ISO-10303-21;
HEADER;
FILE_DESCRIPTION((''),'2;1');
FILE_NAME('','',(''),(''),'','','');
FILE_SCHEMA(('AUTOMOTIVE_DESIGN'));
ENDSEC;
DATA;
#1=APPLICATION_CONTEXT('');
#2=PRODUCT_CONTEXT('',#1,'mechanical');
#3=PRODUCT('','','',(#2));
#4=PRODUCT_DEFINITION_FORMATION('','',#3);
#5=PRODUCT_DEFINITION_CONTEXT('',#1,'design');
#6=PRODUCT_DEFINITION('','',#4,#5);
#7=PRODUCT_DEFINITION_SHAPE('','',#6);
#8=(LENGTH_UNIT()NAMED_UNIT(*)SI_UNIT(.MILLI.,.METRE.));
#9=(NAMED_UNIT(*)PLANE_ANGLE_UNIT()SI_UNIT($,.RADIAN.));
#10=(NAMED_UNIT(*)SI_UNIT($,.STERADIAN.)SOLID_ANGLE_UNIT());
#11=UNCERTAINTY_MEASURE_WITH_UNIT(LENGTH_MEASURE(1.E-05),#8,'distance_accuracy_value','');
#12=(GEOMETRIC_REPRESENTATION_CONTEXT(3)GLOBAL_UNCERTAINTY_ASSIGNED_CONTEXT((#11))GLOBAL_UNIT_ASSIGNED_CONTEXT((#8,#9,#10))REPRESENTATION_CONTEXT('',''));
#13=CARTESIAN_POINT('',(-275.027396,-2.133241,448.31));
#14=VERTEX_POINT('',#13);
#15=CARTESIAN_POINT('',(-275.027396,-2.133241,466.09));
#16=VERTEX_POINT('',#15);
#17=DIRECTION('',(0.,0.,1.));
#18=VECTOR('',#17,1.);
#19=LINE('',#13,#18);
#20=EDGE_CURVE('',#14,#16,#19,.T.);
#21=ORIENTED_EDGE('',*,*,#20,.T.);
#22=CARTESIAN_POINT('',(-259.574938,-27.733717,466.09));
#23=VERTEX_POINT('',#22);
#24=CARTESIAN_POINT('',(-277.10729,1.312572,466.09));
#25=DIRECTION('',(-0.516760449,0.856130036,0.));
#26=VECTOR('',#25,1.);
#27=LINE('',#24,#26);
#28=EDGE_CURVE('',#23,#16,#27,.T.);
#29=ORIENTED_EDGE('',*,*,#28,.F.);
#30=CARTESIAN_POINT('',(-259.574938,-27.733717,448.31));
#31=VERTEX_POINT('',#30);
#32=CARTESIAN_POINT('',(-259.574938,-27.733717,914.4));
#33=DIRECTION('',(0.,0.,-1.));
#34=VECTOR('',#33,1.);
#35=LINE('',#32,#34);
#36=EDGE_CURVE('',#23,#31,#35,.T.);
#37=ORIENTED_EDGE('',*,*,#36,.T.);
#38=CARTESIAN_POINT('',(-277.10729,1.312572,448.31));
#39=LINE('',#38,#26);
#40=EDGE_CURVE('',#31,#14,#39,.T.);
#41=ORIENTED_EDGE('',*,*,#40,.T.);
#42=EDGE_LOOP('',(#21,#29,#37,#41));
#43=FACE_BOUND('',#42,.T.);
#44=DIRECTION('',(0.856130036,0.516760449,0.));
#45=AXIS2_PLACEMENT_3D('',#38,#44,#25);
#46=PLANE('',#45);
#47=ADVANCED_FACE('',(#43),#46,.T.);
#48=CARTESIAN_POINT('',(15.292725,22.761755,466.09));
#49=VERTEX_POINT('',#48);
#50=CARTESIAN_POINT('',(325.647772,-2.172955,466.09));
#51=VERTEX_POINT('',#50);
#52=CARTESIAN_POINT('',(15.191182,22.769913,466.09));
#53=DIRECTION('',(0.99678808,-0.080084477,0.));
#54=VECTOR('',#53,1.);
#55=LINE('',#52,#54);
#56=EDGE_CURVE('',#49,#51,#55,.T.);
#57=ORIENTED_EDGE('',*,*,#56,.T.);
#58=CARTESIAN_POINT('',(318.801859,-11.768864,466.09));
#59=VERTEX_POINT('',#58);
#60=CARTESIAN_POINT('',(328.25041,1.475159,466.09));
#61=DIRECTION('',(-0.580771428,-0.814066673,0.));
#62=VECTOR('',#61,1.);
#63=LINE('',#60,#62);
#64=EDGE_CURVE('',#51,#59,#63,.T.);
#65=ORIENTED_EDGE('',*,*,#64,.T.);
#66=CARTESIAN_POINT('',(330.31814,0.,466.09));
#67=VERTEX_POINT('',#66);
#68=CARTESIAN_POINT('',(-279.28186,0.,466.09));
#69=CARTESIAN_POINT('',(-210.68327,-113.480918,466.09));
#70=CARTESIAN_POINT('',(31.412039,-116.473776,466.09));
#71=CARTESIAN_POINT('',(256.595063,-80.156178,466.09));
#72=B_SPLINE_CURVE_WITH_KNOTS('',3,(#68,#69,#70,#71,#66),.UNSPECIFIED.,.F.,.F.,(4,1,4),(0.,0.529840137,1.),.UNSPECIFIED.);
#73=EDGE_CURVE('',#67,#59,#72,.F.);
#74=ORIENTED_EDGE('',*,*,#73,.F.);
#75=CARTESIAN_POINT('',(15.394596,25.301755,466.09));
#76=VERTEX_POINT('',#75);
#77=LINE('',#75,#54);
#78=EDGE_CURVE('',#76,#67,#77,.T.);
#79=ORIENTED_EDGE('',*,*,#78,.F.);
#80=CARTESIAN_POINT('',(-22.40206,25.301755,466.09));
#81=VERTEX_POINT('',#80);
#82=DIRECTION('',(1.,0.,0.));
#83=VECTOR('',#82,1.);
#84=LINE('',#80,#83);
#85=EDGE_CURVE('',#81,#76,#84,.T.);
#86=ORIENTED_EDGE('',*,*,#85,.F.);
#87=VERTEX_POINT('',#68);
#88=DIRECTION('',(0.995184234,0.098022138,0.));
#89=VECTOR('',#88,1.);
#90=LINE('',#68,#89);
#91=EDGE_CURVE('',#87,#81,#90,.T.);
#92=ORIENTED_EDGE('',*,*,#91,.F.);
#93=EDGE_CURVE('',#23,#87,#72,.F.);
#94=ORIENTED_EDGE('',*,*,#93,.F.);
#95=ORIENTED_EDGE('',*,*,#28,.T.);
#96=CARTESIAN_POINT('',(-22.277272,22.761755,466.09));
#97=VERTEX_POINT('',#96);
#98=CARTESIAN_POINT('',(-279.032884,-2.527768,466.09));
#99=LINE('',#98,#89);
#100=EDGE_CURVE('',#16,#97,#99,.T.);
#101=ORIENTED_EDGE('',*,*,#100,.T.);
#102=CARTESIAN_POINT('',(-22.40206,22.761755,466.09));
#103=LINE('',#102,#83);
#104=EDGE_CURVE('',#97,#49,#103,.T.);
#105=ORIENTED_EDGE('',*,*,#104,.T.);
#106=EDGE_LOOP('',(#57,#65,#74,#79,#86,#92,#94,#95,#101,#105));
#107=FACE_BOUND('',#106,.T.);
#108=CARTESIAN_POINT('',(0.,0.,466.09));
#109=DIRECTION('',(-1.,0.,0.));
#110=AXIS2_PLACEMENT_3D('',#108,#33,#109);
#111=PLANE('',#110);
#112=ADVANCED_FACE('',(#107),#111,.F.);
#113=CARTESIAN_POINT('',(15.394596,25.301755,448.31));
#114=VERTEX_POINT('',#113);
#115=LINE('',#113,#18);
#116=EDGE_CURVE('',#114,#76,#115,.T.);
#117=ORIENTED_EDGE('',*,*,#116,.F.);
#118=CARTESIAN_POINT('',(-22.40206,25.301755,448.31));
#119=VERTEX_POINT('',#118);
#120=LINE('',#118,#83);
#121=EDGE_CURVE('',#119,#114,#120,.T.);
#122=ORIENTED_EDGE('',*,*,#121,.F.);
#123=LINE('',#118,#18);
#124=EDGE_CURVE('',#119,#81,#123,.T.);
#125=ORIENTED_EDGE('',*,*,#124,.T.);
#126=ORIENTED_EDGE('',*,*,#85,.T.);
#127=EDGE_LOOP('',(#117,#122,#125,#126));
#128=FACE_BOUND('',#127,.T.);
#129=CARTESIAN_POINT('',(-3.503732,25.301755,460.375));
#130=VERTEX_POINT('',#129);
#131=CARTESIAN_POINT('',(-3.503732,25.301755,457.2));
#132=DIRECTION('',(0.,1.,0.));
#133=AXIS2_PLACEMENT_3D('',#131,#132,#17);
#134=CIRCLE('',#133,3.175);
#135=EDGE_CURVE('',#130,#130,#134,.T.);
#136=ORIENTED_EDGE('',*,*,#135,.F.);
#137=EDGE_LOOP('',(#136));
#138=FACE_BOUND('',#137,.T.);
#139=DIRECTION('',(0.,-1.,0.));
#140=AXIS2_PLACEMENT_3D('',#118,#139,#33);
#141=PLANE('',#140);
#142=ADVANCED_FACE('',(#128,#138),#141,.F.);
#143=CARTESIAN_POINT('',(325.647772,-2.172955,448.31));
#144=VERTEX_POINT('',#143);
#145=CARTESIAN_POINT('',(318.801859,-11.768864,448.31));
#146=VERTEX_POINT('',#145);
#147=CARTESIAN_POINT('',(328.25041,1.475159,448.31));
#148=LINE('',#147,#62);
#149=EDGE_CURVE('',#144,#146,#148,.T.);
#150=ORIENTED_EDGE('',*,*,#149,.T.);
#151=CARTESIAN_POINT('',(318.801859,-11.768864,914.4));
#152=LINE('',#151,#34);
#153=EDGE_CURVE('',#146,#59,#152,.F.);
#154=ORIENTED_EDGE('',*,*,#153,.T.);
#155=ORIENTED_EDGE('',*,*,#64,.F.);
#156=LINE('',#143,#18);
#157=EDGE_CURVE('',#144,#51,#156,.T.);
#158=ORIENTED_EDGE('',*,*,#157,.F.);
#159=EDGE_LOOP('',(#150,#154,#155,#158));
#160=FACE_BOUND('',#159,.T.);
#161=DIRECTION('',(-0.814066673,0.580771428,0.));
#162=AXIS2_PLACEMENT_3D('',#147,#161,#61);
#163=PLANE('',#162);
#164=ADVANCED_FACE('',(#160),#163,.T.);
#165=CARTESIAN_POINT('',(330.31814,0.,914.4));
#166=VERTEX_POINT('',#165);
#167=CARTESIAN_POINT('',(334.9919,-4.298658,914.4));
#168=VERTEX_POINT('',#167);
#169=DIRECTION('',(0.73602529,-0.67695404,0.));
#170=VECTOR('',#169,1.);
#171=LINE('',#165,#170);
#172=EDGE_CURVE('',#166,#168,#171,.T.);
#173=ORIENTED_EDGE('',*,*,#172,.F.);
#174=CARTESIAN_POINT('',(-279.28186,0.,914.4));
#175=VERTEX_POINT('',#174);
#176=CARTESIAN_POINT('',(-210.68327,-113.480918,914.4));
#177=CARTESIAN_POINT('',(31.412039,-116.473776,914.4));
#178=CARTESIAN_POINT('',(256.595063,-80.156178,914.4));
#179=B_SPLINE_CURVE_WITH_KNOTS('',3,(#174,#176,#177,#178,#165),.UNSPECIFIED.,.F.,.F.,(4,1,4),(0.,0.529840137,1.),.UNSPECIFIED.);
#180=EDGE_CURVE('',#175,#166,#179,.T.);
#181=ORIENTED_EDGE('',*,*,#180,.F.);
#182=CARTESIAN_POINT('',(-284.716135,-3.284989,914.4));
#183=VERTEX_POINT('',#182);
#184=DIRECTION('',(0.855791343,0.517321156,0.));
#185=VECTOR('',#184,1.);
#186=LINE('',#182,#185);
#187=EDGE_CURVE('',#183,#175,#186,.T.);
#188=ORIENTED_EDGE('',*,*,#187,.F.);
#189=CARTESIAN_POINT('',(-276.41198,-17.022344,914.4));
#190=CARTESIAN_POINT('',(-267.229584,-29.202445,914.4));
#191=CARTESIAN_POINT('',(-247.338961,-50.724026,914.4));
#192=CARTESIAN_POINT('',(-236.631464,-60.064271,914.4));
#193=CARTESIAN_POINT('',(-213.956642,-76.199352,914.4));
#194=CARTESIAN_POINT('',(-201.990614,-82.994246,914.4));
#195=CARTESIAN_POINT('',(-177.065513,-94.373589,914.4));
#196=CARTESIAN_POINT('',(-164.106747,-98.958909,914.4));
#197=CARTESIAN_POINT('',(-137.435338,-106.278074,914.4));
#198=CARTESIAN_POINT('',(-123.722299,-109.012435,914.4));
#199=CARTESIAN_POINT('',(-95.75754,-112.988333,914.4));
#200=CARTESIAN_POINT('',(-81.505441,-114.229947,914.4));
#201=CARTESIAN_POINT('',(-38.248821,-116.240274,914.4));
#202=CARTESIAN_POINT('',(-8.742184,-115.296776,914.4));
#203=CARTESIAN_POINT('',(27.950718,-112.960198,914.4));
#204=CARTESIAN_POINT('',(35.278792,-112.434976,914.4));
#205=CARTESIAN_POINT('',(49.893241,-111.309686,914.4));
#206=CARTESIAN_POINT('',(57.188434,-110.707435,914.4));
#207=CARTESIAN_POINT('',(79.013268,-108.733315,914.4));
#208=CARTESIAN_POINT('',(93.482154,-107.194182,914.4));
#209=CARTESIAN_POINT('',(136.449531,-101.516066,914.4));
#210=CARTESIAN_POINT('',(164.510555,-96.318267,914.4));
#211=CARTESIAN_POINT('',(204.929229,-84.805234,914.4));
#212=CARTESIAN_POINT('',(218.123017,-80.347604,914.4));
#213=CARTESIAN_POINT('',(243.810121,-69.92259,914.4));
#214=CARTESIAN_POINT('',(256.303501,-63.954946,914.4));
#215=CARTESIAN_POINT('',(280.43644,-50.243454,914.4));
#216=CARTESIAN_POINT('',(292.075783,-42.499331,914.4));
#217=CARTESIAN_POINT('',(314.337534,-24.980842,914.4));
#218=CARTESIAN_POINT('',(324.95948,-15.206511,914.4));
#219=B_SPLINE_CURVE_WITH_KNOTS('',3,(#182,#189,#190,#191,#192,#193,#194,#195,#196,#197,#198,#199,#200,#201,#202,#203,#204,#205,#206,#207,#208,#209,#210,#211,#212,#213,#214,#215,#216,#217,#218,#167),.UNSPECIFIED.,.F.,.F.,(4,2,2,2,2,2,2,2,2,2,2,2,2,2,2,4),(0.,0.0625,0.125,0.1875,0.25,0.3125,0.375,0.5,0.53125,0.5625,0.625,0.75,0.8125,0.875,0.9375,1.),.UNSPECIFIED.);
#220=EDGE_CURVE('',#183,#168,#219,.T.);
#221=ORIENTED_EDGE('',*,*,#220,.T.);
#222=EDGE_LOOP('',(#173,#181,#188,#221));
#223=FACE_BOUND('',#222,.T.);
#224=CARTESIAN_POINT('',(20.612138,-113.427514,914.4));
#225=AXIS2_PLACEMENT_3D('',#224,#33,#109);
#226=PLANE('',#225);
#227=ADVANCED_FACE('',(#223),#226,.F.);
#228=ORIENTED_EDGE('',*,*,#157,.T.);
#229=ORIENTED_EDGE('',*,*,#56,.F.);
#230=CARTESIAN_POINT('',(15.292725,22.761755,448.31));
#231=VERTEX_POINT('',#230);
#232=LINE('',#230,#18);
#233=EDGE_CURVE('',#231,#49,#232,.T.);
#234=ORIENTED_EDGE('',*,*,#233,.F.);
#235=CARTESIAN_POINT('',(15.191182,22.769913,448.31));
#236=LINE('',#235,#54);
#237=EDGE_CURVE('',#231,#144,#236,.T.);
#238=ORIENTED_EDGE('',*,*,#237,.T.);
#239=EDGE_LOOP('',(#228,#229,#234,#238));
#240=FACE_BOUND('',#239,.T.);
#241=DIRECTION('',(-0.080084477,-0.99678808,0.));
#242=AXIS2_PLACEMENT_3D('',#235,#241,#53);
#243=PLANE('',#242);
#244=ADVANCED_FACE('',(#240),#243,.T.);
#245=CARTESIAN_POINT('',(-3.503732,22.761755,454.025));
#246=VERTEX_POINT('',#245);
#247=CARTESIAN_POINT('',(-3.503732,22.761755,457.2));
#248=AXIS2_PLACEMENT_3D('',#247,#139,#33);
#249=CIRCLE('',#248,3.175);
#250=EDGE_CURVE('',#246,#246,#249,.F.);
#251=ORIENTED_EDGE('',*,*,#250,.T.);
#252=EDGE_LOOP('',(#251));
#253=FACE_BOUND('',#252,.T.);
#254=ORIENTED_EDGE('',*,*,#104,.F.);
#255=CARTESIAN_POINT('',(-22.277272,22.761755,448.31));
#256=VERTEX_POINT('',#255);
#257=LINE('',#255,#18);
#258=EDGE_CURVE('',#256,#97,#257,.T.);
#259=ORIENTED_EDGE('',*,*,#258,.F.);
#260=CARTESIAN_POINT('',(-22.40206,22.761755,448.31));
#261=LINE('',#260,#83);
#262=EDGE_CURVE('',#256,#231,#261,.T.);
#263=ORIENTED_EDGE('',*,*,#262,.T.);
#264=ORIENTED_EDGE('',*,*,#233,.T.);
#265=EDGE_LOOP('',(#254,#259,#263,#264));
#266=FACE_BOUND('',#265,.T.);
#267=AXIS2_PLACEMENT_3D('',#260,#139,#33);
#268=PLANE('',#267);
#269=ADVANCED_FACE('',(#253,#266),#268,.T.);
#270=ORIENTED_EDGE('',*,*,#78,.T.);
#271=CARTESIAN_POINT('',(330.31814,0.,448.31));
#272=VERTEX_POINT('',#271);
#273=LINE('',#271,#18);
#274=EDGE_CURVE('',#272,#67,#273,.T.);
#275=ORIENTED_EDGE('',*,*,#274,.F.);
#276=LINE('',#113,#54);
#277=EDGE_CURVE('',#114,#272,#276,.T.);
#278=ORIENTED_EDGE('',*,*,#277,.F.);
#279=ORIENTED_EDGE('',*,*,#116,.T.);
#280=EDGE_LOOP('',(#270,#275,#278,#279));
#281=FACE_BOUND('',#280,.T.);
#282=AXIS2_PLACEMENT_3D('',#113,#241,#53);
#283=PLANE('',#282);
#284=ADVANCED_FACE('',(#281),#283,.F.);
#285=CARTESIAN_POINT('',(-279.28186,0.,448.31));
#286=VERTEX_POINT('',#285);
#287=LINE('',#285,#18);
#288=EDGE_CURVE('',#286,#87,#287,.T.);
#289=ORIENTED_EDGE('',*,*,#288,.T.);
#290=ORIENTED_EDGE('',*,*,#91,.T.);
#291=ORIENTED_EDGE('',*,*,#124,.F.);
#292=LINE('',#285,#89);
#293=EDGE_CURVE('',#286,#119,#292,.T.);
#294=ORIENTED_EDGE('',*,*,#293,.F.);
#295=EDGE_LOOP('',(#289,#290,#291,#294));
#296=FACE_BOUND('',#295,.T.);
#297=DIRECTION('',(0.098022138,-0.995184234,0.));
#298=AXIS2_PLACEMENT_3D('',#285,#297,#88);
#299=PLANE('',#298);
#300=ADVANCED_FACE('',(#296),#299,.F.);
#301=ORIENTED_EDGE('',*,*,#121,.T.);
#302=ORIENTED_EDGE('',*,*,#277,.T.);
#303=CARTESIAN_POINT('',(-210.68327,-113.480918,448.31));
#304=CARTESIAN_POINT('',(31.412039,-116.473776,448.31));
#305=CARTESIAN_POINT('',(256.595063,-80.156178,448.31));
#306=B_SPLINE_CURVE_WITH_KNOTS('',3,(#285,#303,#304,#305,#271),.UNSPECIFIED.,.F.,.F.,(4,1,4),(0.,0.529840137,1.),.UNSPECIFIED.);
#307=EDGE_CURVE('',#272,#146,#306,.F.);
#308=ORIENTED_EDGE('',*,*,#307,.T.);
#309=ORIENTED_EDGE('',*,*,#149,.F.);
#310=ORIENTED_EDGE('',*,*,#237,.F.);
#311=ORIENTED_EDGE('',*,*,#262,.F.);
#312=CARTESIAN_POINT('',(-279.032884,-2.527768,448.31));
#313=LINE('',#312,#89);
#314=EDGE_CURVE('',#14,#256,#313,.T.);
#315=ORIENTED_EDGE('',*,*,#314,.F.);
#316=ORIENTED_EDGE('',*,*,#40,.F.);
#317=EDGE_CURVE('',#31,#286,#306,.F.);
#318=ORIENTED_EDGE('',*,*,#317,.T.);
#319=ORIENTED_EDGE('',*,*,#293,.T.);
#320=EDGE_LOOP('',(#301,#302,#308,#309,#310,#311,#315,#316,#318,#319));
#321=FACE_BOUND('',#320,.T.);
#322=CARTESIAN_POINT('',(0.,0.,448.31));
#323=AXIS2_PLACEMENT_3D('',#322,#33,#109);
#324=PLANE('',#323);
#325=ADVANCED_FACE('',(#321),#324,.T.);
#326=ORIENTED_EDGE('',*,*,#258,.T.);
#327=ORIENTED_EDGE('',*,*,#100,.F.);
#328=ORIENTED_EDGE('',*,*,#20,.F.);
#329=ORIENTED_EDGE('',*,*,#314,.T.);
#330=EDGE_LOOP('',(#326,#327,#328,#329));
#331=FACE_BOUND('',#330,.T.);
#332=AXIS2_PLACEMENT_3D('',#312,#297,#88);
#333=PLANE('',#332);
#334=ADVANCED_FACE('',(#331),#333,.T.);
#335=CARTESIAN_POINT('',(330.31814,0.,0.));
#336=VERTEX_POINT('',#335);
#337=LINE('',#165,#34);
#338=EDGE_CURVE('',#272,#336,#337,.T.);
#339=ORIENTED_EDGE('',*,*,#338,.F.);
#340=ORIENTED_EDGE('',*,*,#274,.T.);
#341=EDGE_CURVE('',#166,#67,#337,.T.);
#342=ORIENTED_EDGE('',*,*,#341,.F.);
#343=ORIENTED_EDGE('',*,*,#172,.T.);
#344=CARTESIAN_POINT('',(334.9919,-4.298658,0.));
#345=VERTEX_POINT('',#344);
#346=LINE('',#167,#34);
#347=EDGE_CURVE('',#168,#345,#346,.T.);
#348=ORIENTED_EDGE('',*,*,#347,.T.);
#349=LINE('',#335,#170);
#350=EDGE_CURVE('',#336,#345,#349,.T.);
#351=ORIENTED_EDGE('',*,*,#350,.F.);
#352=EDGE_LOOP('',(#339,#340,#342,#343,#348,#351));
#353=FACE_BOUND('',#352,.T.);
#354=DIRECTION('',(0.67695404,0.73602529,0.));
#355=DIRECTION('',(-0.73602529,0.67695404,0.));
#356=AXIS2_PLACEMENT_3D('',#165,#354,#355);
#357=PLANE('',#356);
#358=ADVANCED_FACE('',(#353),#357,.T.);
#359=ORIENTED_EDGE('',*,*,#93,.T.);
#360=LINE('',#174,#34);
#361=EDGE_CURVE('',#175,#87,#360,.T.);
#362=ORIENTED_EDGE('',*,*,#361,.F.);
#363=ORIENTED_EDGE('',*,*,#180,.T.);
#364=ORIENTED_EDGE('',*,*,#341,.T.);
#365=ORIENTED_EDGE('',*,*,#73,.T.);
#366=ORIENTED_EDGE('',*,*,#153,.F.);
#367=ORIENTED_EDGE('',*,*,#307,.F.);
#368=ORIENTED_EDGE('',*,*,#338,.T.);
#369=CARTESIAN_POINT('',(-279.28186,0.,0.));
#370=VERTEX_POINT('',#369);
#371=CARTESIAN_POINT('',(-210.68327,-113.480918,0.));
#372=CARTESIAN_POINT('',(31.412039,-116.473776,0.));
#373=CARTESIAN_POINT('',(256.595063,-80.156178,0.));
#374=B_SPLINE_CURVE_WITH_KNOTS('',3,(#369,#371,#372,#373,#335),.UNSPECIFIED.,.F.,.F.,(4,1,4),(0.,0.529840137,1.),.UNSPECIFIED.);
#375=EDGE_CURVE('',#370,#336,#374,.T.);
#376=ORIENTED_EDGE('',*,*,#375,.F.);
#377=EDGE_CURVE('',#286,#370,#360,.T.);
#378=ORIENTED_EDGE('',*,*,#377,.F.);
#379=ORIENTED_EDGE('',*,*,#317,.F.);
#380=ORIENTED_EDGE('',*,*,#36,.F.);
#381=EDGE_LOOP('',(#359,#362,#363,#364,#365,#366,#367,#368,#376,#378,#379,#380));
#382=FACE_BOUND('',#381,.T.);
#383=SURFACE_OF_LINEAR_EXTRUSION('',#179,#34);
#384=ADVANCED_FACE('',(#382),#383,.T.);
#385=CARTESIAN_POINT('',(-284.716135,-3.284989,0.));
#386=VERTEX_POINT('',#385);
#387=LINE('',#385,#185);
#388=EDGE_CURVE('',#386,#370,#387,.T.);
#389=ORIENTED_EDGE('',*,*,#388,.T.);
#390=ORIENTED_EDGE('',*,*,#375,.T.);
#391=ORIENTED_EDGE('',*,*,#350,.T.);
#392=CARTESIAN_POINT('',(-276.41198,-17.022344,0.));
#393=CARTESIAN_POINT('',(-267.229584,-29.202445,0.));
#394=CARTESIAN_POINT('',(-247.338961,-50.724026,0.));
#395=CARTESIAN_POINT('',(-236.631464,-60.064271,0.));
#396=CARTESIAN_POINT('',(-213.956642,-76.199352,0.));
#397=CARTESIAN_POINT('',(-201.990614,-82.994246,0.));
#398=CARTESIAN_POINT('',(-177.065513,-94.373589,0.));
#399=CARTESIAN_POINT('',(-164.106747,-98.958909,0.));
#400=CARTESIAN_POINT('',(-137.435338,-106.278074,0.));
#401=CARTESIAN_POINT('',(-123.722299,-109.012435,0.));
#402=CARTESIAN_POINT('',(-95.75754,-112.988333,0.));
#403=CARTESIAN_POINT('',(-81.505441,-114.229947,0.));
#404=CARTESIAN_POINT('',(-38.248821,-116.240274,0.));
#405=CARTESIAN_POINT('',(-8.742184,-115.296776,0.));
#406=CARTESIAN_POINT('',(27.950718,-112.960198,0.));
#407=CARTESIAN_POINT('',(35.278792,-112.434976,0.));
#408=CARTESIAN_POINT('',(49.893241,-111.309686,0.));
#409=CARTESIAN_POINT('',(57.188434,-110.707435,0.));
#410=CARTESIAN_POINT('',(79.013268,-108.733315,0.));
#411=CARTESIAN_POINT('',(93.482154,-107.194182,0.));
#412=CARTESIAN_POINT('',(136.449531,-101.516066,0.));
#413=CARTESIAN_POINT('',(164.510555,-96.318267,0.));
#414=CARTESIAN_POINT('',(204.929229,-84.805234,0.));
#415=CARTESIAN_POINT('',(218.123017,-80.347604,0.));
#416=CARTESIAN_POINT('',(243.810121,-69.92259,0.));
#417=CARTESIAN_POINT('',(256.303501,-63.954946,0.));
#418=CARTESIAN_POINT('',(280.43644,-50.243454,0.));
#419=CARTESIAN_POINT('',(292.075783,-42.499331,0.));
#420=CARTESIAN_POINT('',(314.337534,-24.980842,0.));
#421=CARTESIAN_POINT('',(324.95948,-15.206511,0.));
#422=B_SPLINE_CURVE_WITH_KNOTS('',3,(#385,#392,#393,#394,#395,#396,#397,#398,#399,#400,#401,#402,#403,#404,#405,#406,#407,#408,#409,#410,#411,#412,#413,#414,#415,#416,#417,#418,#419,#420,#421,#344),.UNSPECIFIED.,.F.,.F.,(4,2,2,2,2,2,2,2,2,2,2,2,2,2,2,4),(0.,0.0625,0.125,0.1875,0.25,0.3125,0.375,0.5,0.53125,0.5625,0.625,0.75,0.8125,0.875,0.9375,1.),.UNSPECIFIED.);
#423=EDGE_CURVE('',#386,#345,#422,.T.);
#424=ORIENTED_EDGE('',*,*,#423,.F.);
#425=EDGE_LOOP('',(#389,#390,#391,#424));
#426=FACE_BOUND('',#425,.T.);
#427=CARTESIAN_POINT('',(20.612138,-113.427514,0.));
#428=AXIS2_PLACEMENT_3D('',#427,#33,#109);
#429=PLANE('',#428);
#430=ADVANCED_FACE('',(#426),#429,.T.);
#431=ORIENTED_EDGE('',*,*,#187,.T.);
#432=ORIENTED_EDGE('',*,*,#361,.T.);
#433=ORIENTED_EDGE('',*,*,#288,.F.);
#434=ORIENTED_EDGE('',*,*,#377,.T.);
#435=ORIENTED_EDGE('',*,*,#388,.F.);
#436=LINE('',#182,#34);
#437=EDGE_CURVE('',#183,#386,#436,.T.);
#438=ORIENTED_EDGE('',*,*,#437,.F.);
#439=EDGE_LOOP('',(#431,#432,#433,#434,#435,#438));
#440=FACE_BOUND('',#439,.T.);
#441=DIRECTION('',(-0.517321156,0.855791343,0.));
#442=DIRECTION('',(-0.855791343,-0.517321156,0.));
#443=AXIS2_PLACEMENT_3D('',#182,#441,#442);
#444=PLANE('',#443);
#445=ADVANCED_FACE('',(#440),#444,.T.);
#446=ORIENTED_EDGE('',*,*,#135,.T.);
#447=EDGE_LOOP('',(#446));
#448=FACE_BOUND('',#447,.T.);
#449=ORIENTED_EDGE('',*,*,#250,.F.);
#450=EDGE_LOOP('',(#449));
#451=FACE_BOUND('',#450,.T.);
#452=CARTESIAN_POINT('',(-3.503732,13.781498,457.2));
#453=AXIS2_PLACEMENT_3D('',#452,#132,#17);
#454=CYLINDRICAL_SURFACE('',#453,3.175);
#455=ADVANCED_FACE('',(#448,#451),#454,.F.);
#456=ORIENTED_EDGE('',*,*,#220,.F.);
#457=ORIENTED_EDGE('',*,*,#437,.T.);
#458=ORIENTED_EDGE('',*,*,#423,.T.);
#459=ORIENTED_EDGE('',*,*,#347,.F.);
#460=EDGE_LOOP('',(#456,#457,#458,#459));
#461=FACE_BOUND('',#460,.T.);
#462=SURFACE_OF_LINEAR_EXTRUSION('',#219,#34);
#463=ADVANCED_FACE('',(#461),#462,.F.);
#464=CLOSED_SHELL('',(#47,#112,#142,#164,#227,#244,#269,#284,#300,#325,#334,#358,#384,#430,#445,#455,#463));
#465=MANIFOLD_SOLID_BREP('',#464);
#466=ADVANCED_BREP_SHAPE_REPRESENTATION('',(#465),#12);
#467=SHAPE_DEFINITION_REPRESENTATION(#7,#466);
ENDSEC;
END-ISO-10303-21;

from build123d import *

# Parameters (mm, degrees)
EXTRUDE_THIN1_DEPTH      = 914.4
EXTRUDE_THIN4_DEPTH      = 8.89
EXTRUDE_THIN4_DEPTH_BACK = 8.89
SKETCH3_R                = 3.175
CUT_EXTRUDE1_DEPTH       = 2.54


# Read off the part's stored shape, not the designer's step: Extrude-Thin1
with BuildPart() as part:
    # Extrude-Thin1 outline → Extrude-Thin1 (new body)
    with BuildSketch(Plane.XY):
        with BuildLine():
            Line((-279.281860465, 0), (-284.71613549, -3.284989338))
            add(Edge.make_bspline(
                [(-284.71613549, -3.284989338), (-276.411980171, -17.022344077), (-267.229584336, -29.202445288), (-247.338960844, -50.724026352), (-236.631464335, -60.064270549), (-213.95664245, -76.199351518), (-201.990613754, -82.994245551), (-177.065513095, -94.373588626), (-164.106747152, -98.958909243), (-137.435337906, -106.278074265), (-123.722298844, -109.012434747), (-95.757540475, -112.988332753), (-81.50544134, -114.229947253), (-38.248820893, -116.240274168), (-8.742183636, -115.296775681), (27.950717972, -112.960198025), (35.278792072, -112.434976439), (49.893241244, -111.309686323), (57.188433916, -110.707434609), (79.013267611, -108.733315329), (93.482153818, -107.194182238), (136.449530574, -101.516065662), (164.51055488, -96.31826732), (204.929228546, -84.805234416), (218.123016692, -80.347603619), (243.810120822, -69.922590111), (256.303500739, -63.954946432), (280.436440477, -50.243453576), (292.075782995, -42.499330863), (314.337533524, -24.980842308), (324.959480174, -15.206510631), (334.991900126, -4.298658156)],
                knots=[0, 0, 0, 0, 0.0625, 0.0625, 0.125, 0.125, 0.1875, 0.1875, 0.25, 0.25, 0.3125, 0.3125, 0.375, 0.375, 0.5, 0.5, 0.53125, 0.53125, 0.5625, 0.5625, 0.625, 0.625, 0.75, 0.75, 0.8125, 0.8125, 0.875, 0.875, 0.9375, 0.9375, 1, 1, 1, 1], degree=3))
            Line((334.991900126, -4.298658156), (330.318139535, 0))
            add(Edge.make_bspline(
                [(-279.281860465, 0), (-210.683269989, -113.480918379), (31.412039024, -116.473776402), (256.595063057, -80.156178281), (330.318139535, 0)],
                knots=[0, 0, 0, 0, 0.529840137, 1, 1, 1, 1], degree=3))
        make_face()
    extrude(amount=EXTRUDE_THIN1_DEPTH)

    # Sketch2 → Extrude-Thin4 (add, two sides: drawn at the far end of the back side and taken through both)
    with BuildSketch(Plane.XY.offset(457.2).offset(-EXTRUDE_THIN4_DEPTH_BACK)):
        Polygon((-259.425934823, -32.895811523), (-279.281860465, 0), (-22.402060356, 25.301754569), (15.394596297, 25.301754569), (330.318139535, 0), (318.3059636, -16.837453823), (316.23823425, -15.362294396), (325.647772165, -2.172955429), (15.292725411, 22.761754569), (-22.277271764, 22.761754569), (-275.027395985, -2.133241486), (-257.251364532, -31.583239983), align=None)
    extrude(amount=EXTRUDE_THIN4_DEPTH + EXTRUDE_THIN4_DEPTH_BACK)

    # Sketch3 → Cut-Extrude1 (cut)
    with BuildSketch(Plane(origin=(0, 25.301754569, 0), x_dir=(1, 0, 0), z_dir=(0, 1, 0))):
        with Locations(Location((-3.503732029, -457.2, 0), (0, 0, 270))):
            Circle(SKETCH3_R)
    extrude(amount=-CUT_EXTRUDE1_DEPTH, mode=Mode.SUBTRACT)


solid = part.part
